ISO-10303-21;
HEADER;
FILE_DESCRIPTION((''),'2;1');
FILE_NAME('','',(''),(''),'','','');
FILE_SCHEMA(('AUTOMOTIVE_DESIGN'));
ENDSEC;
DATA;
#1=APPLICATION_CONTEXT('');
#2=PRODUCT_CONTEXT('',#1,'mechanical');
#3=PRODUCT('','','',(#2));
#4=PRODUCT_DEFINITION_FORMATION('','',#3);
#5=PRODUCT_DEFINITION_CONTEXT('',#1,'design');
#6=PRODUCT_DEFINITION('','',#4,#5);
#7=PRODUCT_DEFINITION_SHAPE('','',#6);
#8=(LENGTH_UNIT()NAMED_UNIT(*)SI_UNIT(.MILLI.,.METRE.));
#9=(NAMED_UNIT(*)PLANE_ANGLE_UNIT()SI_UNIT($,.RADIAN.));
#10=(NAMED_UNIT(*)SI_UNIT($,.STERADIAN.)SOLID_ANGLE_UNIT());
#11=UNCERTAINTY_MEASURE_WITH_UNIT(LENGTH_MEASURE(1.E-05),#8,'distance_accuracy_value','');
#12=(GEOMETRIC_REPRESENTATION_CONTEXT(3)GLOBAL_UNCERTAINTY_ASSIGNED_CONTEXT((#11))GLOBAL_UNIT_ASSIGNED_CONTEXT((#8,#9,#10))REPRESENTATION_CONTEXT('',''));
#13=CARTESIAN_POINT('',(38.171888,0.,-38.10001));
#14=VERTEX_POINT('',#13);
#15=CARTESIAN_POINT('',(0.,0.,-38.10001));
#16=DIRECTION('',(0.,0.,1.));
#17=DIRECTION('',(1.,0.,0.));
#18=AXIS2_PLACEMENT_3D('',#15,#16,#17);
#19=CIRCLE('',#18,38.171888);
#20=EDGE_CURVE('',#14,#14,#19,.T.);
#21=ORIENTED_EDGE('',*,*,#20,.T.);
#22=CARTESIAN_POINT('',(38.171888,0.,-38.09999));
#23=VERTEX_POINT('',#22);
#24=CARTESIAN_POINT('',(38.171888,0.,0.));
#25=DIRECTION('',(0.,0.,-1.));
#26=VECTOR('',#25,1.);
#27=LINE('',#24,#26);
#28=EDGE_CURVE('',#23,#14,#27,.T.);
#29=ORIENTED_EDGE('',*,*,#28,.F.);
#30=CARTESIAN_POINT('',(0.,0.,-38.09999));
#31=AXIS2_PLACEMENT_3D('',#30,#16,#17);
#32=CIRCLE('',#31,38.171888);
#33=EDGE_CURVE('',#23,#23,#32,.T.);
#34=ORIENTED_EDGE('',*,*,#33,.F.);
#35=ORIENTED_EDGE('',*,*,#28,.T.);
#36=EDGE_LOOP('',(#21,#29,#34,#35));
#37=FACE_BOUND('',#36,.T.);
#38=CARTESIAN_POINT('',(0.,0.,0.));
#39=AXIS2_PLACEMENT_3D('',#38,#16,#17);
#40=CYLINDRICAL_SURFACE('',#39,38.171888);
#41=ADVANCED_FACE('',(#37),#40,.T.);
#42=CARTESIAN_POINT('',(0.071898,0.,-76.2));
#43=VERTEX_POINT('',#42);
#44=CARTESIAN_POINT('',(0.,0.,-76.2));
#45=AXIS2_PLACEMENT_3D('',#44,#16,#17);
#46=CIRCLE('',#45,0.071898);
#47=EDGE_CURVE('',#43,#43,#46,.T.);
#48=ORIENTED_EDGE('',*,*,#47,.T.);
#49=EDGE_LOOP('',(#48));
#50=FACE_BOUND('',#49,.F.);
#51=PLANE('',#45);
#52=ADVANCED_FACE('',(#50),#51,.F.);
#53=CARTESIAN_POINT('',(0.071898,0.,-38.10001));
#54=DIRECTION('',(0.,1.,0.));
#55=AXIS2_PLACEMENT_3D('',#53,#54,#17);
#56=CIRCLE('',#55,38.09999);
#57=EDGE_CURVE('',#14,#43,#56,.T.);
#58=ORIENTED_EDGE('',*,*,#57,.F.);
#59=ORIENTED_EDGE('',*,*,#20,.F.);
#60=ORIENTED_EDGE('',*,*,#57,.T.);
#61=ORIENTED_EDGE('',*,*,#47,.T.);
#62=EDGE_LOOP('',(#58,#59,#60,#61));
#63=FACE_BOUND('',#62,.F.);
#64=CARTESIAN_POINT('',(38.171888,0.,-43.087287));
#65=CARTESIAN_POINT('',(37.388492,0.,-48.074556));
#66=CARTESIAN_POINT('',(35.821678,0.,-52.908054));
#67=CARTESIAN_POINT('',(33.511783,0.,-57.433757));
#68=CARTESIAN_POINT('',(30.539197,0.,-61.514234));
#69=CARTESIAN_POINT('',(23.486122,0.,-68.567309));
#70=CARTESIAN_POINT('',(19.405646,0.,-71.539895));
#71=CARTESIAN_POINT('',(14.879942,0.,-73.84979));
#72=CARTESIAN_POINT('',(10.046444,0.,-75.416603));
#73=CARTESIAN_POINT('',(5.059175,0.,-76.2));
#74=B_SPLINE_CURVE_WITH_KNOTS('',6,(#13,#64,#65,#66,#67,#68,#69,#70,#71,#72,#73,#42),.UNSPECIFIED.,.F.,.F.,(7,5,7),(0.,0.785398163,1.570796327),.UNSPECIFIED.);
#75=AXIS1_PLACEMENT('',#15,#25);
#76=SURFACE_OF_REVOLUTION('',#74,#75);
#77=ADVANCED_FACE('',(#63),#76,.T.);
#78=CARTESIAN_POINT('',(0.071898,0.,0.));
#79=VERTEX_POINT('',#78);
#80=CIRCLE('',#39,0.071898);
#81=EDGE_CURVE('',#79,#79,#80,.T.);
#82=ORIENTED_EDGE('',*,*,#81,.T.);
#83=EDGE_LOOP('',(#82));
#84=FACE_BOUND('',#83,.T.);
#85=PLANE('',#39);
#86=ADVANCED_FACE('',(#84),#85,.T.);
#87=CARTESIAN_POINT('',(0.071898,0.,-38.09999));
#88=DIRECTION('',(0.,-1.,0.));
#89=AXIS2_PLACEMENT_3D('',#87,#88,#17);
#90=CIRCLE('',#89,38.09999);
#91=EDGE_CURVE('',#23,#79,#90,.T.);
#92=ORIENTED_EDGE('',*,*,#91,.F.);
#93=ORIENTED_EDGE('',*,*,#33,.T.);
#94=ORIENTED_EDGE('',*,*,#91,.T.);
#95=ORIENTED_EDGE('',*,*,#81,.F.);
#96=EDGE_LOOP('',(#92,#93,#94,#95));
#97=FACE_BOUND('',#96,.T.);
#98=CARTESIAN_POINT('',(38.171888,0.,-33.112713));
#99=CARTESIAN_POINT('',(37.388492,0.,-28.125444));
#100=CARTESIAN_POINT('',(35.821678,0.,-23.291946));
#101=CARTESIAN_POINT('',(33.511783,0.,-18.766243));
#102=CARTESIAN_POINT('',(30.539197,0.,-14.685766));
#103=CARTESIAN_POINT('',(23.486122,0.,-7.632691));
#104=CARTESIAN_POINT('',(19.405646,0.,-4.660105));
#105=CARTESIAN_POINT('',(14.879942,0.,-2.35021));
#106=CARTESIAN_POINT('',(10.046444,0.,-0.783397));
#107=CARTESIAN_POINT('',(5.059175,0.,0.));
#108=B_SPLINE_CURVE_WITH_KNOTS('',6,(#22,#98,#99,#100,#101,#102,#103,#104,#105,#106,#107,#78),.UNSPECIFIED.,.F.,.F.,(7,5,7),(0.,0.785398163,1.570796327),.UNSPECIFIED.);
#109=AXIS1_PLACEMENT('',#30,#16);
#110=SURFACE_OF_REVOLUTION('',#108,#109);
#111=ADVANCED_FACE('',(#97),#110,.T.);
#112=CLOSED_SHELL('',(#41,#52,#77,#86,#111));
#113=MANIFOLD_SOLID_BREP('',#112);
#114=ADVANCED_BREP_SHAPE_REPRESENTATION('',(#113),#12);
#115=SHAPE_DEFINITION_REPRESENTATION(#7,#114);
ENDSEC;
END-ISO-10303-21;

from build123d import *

# Parameters (mm, degrees)
F0_R     = 38.1718882339
F1_DEPTH = 76.2
F2_R     = 38.09999


# Not quite as in the source:
# - a fillet or chamfer is up to 0.001 mm smaller than in the source, because OpenCascade refuses the exact size


with BuildPart() as f1:
    # F0 (on Top) → F1 (new body)
    with BuildSketch(Plane.XY):
        Circle(F0_R)
    extrude(amount=-F1_DEPTH)

    # F2 (radius 38.1 in the source; OpenCascade refuses exactly that, so slightly less here)
    f2_edges = [f1.edges().sort_by_distance(p)[0] for p in [
        (-38.171888, 0, 0),
        (-38.171888, 0, -76.2),
    ]]
    fillet(f2_edges, radius=F2_R)


solid = f1.part
